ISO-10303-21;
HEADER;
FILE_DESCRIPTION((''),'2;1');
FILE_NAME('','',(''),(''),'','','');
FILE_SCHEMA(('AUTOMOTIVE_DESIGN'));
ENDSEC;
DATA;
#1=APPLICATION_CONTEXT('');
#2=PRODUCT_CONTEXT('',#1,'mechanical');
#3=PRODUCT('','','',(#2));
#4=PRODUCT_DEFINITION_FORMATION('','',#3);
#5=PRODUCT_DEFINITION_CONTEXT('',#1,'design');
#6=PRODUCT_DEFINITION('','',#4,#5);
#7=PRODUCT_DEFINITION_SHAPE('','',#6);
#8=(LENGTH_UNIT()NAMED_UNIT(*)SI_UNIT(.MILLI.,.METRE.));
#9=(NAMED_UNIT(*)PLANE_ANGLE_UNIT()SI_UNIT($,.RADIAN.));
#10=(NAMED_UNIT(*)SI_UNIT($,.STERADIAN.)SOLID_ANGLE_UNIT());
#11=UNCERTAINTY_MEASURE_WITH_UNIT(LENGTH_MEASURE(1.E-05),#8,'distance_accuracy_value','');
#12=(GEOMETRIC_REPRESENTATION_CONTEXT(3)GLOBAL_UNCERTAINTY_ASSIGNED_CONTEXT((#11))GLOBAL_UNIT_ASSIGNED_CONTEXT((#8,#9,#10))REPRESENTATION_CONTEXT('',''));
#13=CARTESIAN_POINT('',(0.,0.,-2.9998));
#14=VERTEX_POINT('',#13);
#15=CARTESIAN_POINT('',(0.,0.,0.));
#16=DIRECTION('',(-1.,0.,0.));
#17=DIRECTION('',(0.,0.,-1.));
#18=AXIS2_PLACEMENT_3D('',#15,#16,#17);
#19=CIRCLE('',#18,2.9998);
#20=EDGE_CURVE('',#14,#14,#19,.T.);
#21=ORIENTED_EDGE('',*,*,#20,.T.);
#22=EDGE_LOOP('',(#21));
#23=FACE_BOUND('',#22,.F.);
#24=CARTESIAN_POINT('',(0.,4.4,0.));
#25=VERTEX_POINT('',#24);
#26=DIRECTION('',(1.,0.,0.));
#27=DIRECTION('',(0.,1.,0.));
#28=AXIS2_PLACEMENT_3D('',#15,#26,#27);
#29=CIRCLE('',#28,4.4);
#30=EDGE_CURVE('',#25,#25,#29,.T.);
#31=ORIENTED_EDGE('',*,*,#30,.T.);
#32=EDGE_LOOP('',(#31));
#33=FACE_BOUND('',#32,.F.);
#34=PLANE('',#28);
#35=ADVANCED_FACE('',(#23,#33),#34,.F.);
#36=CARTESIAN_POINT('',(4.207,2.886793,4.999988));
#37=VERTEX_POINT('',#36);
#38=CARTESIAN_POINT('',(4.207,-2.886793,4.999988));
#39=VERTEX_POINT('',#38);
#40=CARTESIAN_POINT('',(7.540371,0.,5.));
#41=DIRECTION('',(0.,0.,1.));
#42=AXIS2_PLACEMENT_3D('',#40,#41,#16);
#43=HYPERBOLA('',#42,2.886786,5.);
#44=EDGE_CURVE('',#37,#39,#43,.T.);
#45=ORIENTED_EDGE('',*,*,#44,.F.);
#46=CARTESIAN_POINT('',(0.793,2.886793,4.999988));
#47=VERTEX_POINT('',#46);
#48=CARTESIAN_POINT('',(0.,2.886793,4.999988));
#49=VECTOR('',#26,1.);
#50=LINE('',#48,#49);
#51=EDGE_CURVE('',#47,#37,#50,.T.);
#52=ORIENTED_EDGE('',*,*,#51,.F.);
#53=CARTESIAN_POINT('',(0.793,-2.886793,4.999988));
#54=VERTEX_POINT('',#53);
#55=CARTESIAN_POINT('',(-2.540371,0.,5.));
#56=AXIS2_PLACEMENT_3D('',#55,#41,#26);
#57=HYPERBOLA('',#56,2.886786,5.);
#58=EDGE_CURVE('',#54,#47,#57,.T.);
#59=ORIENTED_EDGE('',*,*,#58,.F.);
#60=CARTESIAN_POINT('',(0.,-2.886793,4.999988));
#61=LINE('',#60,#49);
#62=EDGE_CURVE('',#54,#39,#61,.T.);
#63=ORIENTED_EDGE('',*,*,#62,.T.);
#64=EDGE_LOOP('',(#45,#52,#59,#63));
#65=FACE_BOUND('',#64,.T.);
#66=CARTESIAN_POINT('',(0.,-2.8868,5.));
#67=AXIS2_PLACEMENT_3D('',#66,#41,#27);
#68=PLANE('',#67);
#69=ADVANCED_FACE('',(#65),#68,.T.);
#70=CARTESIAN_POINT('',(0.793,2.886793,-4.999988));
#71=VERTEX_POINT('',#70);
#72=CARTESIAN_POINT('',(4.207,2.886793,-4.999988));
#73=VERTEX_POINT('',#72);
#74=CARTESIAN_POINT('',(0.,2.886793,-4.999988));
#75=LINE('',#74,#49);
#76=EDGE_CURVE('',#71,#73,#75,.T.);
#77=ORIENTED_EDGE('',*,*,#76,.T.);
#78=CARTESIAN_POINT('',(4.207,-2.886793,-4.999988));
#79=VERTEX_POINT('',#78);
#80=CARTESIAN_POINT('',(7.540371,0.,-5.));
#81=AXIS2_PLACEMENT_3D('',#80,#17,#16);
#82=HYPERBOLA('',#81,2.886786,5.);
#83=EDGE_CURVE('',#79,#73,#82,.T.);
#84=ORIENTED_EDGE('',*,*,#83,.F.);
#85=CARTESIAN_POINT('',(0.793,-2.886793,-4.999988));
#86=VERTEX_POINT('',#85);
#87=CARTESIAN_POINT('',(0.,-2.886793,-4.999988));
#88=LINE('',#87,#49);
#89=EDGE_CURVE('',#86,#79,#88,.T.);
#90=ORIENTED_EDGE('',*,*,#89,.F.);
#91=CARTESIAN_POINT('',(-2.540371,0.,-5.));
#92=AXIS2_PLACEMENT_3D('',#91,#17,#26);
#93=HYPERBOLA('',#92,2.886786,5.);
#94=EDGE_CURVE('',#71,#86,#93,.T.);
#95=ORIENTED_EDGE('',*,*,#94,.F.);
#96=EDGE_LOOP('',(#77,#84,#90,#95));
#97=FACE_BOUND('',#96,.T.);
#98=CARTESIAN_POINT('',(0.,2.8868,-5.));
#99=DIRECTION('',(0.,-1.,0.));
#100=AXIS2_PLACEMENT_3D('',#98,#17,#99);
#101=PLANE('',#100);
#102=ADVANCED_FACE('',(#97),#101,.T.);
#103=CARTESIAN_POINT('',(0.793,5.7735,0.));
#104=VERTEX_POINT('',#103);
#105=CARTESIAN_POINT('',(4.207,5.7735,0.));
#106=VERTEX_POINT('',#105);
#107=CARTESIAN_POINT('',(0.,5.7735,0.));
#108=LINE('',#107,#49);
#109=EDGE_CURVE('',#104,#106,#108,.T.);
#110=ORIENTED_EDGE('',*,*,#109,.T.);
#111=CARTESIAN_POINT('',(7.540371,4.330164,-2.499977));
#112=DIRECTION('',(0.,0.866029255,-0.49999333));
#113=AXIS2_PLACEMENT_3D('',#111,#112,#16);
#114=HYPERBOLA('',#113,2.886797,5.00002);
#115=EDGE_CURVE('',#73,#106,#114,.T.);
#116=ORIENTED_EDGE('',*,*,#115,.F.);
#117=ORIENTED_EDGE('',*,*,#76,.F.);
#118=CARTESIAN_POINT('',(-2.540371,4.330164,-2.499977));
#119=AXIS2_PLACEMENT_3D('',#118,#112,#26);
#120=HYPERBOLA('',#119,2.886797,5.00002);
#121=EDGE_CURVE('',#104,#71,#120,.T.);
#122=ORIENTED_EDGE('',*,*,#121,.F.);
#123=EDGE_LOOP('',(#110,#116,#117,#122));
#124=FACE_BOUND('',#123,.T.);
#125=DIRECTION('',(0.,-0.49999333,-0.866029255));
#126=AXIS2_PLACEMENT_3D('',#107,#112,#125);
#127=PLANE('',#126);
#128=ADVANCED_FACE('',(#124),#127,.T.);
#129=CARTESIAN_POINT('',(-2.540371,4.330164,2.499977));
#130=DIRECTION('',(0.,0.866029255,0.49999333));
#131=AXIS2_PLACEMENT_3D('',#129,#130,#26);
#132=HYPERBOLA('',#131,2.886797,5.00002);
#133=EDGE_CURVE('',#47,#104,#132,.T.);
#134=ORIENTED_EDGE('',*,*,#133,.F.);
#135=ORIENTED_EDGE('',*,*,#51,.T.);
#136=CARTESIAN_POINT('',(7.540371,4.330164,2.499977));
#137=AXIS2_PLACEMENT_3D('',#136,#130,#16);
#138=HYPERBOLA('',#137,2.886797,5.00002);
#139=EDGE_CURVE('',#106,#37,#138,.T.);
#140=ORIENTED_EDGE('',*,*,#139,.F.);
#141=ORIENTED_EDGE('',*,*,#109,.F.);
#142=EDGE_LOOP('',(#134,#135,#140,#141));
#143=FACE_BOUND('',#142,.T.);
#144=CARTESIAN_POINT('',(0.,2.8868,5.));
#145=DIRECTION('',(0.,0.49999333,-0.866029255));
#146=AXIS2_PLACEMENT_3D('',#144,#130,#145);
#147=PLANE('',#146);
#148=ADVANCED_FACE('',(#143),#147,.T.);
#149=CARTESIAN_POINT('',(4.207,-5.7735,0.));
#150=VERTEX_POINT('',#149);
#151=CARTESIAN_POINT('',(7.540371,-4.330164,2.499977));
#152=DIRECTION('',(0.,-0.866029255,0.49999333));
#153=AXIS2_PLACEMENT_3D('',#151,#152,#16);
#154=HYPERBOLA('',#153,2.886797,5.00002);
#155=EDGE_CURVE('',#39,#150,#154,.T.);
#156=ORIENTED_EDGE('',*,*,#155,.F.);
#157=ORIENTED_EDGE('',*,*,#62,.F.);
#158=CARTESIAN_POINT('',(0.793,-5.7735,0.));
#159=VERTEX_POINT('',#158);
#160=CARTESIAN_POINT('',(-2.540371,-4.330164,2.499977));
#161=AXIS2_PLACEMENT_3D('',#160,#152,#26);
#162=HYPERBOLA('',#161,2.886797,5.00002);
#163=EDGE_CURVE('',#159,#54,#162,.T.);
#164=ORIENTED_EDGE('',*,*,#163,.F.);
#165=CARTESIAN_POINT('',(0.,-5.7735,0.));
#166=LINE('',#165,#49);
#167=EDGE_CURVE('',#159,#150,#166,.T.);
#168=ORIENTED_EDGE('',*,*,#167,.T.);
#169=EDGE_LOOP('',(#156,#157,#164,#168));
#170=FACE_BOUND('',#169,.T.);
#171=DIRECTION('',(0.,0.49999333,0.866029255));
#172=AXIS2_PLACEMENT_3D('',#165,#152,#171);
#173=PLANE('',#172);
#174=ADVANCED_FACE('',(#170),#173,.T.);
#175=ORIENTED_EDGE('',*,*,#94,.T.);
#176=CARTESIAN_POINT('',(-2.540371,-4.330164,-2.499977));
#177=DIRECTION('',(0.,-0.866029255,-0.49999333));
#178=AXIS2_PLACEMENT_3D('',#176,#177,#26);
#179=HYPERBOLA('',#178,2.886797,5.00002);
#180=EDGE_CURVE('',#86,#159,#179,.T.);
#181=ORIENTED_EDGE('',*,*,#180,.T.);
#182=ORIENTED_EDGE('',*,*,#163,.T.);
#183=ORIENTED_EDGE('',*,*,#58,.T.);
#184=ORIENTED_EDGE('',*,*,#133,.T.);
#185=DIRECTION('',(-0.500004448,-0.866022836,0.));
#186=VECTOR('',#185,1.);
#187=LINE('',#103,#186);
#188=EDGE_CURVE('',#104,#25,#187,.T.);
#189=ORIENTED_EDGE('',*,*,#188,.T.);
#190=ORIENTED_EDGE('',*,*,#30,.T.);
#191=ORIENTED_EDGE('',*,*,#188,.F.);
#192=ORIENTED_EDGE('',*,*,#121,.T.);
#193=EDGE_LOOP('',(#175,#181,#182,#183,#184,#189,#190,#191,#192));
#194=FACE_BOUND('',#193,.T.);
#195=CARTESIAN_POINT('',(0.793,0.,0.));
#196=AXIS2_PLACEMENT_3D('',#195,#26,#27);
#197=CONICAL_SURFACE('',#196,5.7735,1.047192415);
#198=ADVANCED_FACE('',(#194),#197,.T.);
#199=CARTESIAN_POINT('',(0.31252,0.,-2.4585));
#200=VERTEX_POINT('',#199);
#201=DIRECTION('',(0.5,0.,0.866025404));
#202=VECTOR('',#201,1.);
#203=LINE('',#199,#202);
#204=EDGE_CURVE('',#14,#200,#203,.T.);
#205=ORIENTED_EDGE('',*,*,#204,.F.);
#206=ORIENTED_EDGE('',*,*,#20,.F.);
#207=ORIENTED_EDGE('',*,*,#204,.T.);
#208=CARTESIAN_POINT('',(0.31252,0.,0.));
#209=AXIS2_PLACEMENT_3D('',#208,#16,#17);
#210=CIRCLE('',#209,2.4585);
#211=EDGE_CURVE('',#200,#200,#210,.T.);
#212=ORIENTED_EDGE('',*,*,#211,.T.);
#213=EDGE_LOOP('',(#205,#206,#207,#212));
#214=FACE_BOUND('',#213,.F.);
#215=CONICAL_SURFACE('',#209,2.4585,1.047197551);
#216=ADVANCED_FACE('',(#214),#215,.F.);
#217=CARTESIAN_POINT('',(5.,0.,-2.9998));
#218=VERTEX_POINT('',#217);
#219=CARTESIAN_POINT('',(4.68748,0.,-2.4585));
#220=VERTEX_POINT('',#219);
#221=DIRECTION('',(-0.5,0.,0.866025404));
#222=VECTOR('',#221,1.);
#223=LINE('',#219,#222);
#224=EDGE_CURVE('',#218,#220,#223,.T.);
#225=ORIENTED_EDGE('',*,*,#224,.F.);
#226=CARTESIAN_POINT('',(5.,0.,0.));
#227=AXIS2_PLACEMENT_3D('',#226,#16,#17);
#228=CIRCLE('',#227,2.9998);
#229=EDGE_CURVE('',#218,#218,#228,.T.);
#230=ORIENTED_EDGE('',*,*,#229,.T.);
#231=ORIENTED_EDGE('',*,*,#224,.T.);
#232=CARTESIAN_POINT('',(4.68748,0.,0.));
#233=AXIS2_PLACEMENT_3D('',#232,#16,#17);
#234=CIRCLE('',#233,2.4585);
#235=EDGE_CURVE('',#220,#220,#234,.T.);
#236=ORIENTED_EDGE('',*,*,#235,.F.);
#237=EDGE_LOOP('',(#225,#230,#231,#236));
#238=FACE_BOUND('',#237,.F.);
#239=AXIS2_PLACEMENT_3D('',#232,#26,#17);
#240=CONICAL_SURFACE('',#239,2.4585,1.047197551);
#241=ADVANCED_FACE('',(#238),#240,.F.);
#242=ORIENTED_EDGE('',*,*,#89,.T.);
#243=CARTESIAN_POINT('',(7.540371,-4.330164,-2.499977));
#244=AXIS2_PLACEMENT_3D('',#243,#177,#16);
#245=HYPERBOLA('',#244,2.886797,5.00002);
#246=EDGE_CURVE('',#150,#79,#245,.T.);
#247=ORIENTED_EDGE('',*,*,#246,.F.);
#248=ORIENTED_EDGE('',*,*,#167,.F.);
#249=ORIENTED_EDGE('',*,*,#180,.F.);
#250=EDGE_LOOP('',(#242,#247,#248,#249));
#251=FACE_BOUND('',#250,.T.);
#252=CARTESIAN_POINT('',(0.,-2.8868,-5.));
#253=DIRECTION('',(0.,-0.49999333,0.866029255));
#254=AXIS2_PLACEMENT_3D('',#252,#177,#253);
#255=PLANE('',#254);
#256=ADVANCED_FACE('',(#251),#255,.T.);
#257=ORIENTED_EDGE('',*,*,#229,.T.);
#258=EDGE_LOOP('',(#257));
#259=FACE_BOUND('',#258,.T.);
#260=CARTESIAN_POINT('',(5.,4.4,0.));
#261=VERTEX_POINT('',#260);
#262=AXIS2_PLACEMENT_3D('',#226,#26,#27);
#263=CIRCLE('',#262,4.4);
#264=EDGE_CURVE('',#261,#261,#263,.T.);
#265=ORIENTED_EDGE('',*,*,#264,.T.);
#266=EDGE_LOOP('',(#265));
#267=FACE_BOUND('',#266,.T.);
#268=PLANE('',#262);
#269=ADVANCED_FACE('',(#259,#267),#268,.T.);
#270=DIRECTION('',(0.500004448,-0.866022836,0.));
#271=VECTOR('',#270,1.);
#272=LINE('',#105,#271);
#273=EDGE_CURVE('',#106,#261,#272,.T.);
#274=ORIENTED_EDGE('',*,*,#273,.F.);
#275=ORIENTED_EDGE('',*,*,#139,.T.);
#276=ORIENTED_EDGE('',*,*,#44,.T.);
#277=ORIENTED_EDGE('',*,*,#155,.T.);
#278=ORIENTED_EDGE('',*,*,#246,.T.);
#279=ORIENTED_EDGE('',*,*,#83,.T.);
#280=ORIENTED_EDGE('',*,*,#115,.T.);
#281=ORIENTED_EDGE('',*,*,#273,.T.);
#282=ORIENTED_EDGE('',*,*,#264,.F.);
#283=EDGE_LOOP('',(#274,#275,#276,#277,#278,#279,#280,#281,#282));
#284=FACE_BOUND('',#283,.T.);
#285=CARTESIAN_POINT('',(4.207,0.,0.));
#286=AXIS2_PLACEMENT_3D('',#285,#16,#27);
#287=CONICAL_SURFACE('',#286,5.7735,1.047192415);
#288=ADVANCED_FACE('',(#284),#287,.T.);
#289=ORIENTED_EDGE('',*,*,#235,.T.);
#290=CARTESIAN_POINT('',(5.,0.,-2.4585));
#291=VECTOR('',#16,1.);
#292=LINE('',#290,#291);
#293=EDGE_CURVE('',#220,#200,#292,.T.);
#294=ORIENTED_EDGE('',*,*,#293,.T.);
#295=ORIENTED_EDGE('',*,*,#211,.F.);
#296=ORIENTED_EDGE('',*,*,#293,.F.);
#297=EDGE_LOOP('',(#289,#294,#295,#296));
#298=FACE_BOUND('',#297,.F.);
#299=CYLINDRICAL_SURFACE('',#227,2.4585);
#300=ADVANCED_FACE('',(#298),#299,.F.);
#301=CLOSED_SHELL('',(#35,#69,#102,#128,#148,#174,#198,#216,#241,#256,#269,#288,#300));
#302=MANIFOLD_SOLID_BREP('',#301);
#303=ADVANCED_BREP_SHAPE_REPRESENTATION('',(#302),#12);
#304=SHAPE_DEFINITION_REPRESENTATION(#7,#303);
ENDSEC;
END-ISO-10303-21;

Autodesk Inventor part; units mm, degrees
ref_plane "YZ Plane" through (0, 0, 0) normal (1, 0, 0) x (0, 1, 0)
ref_plane "XZ Plane" through (0, 0, 0) normal (0, 1, 0) x (-1, 0, 0)
sketch "Sketch1" plane through (0, 0, 0) normal (1, 0, 0) x (0, 1, 0)
  line L0 (-5.7735, 0) -> (-2.8868, 5)
  line L1 (-2.8868, 5) -> (2.8868, 5)
  line L2 (2.8868, 5) -> (5.7735, 0)
  line L3 (5.7735, 0) -> (2.8868, -5)
  line L4 (2.8868, -5) -> (-2.8868, -5)
  line L5 (-2.8868, -5) -> (-5.7735, 0)
  point P0 (0, 0)
  point P1 (0, 0)
  dimension "d0" = 11.547
extrude "Body" add sketch "Sketch1" along normal blind 5
sketch "Sketch2" plane through (0, 0, 0) normal (0, 0, 1) x (1, 0, 0)
  line L0 (0, 2.8868) -> (0, 5.7735) projected
  line L1 (0, 5.7735) -> (5, 5.7735) projected
  line L2 (5, 2.8868) -> (5, 5.7735) projected
  line L3 (-1, 0) -> (6, 0) projected
  line L4 (0.793, 5.7735) -> (0, 4.4)
  line L5 (4.207, 5.7735) -> (5, 4.4)
  dimension "d3" = 30
  dimension "d4" = 30
  dimension "d5" = 8.8
  dimension "d6" = 8.8
revolve "Chamfer1" cut sketch "Sketch2" angle 360 about axis through (-10, 0, 0) along (1, 0, 0)
sketch "Sketch3" plane through (5, 0, 0) normal (1, 0, 0) x (0, 0, -1)
  arc A0 (-0.625, -1.0825) -> (0.625, -1.0825) centre (0, 0) ccw projected
hole "Thread" at (5, 0, 0) direction (-1, 0, 0) diameter 4.917 end through all thread size "M6x1" class "6H" standard "ISO Metric profile"
chamfer "Chamfer2" distance 0.5413 angle 30 1 edges at (5, 0, 2.4585) measured on face at (5, 3.7042, -0.4498)
chamfer "Chamfer3" distance 0.5413 angle 30 1 edges at (0, 0, 2.4585) measured on face at (0, 3.7042, -0.4498)
ref_plane "Work Plane1" through (-11.098, 0, 0) normal (0, -0.8660254, -0.5) x (1, 0, 0)
equation "\"d0\" = 1.1547 * SW"
equation "\"d1\" = KOH"
equation "\"d8\" = -0.5 * GD1 + 0.5 * NND"
equation "\"d40\" = -0.5 * GD1 + 0.5 * NND"
equation "\"d10\" = -0.5 * GD1 + 0.5 * NND"
equation "\"d41\" = -0.5 * GD1 + 0.5 * NND"
equation "\"d3\" = ANG1"
equation "\"d4\" = ANG2"
equation "\"d5\" = SW0"
equation "\"d6\" = SW01"
equation "\"ANG1\" = 30deg"
equation "\"ANG2\" = 30deg"
equation "\"NND\" = 6"
equation "\"KOH\" = 5"
equation "\"SW0\" = SW01"
equation "\"SW01\" = 8.8"
equation "\"GUL\" = 0.541266 * PTC"
equation "\"THREADDIA\" = 6"
equation "\"TOA\" = 30deg"
equation "\"PTC\" = 1"
equation "\"E0\" = 1.155 * SW"
equation "\"GAL\" = 0.541266 * PTC"
equation "\"SW\" = 10"
equation "\"GD1\" = 4.917468"
properties part number "DIN 934 - M6" material "Steel, Mild"
